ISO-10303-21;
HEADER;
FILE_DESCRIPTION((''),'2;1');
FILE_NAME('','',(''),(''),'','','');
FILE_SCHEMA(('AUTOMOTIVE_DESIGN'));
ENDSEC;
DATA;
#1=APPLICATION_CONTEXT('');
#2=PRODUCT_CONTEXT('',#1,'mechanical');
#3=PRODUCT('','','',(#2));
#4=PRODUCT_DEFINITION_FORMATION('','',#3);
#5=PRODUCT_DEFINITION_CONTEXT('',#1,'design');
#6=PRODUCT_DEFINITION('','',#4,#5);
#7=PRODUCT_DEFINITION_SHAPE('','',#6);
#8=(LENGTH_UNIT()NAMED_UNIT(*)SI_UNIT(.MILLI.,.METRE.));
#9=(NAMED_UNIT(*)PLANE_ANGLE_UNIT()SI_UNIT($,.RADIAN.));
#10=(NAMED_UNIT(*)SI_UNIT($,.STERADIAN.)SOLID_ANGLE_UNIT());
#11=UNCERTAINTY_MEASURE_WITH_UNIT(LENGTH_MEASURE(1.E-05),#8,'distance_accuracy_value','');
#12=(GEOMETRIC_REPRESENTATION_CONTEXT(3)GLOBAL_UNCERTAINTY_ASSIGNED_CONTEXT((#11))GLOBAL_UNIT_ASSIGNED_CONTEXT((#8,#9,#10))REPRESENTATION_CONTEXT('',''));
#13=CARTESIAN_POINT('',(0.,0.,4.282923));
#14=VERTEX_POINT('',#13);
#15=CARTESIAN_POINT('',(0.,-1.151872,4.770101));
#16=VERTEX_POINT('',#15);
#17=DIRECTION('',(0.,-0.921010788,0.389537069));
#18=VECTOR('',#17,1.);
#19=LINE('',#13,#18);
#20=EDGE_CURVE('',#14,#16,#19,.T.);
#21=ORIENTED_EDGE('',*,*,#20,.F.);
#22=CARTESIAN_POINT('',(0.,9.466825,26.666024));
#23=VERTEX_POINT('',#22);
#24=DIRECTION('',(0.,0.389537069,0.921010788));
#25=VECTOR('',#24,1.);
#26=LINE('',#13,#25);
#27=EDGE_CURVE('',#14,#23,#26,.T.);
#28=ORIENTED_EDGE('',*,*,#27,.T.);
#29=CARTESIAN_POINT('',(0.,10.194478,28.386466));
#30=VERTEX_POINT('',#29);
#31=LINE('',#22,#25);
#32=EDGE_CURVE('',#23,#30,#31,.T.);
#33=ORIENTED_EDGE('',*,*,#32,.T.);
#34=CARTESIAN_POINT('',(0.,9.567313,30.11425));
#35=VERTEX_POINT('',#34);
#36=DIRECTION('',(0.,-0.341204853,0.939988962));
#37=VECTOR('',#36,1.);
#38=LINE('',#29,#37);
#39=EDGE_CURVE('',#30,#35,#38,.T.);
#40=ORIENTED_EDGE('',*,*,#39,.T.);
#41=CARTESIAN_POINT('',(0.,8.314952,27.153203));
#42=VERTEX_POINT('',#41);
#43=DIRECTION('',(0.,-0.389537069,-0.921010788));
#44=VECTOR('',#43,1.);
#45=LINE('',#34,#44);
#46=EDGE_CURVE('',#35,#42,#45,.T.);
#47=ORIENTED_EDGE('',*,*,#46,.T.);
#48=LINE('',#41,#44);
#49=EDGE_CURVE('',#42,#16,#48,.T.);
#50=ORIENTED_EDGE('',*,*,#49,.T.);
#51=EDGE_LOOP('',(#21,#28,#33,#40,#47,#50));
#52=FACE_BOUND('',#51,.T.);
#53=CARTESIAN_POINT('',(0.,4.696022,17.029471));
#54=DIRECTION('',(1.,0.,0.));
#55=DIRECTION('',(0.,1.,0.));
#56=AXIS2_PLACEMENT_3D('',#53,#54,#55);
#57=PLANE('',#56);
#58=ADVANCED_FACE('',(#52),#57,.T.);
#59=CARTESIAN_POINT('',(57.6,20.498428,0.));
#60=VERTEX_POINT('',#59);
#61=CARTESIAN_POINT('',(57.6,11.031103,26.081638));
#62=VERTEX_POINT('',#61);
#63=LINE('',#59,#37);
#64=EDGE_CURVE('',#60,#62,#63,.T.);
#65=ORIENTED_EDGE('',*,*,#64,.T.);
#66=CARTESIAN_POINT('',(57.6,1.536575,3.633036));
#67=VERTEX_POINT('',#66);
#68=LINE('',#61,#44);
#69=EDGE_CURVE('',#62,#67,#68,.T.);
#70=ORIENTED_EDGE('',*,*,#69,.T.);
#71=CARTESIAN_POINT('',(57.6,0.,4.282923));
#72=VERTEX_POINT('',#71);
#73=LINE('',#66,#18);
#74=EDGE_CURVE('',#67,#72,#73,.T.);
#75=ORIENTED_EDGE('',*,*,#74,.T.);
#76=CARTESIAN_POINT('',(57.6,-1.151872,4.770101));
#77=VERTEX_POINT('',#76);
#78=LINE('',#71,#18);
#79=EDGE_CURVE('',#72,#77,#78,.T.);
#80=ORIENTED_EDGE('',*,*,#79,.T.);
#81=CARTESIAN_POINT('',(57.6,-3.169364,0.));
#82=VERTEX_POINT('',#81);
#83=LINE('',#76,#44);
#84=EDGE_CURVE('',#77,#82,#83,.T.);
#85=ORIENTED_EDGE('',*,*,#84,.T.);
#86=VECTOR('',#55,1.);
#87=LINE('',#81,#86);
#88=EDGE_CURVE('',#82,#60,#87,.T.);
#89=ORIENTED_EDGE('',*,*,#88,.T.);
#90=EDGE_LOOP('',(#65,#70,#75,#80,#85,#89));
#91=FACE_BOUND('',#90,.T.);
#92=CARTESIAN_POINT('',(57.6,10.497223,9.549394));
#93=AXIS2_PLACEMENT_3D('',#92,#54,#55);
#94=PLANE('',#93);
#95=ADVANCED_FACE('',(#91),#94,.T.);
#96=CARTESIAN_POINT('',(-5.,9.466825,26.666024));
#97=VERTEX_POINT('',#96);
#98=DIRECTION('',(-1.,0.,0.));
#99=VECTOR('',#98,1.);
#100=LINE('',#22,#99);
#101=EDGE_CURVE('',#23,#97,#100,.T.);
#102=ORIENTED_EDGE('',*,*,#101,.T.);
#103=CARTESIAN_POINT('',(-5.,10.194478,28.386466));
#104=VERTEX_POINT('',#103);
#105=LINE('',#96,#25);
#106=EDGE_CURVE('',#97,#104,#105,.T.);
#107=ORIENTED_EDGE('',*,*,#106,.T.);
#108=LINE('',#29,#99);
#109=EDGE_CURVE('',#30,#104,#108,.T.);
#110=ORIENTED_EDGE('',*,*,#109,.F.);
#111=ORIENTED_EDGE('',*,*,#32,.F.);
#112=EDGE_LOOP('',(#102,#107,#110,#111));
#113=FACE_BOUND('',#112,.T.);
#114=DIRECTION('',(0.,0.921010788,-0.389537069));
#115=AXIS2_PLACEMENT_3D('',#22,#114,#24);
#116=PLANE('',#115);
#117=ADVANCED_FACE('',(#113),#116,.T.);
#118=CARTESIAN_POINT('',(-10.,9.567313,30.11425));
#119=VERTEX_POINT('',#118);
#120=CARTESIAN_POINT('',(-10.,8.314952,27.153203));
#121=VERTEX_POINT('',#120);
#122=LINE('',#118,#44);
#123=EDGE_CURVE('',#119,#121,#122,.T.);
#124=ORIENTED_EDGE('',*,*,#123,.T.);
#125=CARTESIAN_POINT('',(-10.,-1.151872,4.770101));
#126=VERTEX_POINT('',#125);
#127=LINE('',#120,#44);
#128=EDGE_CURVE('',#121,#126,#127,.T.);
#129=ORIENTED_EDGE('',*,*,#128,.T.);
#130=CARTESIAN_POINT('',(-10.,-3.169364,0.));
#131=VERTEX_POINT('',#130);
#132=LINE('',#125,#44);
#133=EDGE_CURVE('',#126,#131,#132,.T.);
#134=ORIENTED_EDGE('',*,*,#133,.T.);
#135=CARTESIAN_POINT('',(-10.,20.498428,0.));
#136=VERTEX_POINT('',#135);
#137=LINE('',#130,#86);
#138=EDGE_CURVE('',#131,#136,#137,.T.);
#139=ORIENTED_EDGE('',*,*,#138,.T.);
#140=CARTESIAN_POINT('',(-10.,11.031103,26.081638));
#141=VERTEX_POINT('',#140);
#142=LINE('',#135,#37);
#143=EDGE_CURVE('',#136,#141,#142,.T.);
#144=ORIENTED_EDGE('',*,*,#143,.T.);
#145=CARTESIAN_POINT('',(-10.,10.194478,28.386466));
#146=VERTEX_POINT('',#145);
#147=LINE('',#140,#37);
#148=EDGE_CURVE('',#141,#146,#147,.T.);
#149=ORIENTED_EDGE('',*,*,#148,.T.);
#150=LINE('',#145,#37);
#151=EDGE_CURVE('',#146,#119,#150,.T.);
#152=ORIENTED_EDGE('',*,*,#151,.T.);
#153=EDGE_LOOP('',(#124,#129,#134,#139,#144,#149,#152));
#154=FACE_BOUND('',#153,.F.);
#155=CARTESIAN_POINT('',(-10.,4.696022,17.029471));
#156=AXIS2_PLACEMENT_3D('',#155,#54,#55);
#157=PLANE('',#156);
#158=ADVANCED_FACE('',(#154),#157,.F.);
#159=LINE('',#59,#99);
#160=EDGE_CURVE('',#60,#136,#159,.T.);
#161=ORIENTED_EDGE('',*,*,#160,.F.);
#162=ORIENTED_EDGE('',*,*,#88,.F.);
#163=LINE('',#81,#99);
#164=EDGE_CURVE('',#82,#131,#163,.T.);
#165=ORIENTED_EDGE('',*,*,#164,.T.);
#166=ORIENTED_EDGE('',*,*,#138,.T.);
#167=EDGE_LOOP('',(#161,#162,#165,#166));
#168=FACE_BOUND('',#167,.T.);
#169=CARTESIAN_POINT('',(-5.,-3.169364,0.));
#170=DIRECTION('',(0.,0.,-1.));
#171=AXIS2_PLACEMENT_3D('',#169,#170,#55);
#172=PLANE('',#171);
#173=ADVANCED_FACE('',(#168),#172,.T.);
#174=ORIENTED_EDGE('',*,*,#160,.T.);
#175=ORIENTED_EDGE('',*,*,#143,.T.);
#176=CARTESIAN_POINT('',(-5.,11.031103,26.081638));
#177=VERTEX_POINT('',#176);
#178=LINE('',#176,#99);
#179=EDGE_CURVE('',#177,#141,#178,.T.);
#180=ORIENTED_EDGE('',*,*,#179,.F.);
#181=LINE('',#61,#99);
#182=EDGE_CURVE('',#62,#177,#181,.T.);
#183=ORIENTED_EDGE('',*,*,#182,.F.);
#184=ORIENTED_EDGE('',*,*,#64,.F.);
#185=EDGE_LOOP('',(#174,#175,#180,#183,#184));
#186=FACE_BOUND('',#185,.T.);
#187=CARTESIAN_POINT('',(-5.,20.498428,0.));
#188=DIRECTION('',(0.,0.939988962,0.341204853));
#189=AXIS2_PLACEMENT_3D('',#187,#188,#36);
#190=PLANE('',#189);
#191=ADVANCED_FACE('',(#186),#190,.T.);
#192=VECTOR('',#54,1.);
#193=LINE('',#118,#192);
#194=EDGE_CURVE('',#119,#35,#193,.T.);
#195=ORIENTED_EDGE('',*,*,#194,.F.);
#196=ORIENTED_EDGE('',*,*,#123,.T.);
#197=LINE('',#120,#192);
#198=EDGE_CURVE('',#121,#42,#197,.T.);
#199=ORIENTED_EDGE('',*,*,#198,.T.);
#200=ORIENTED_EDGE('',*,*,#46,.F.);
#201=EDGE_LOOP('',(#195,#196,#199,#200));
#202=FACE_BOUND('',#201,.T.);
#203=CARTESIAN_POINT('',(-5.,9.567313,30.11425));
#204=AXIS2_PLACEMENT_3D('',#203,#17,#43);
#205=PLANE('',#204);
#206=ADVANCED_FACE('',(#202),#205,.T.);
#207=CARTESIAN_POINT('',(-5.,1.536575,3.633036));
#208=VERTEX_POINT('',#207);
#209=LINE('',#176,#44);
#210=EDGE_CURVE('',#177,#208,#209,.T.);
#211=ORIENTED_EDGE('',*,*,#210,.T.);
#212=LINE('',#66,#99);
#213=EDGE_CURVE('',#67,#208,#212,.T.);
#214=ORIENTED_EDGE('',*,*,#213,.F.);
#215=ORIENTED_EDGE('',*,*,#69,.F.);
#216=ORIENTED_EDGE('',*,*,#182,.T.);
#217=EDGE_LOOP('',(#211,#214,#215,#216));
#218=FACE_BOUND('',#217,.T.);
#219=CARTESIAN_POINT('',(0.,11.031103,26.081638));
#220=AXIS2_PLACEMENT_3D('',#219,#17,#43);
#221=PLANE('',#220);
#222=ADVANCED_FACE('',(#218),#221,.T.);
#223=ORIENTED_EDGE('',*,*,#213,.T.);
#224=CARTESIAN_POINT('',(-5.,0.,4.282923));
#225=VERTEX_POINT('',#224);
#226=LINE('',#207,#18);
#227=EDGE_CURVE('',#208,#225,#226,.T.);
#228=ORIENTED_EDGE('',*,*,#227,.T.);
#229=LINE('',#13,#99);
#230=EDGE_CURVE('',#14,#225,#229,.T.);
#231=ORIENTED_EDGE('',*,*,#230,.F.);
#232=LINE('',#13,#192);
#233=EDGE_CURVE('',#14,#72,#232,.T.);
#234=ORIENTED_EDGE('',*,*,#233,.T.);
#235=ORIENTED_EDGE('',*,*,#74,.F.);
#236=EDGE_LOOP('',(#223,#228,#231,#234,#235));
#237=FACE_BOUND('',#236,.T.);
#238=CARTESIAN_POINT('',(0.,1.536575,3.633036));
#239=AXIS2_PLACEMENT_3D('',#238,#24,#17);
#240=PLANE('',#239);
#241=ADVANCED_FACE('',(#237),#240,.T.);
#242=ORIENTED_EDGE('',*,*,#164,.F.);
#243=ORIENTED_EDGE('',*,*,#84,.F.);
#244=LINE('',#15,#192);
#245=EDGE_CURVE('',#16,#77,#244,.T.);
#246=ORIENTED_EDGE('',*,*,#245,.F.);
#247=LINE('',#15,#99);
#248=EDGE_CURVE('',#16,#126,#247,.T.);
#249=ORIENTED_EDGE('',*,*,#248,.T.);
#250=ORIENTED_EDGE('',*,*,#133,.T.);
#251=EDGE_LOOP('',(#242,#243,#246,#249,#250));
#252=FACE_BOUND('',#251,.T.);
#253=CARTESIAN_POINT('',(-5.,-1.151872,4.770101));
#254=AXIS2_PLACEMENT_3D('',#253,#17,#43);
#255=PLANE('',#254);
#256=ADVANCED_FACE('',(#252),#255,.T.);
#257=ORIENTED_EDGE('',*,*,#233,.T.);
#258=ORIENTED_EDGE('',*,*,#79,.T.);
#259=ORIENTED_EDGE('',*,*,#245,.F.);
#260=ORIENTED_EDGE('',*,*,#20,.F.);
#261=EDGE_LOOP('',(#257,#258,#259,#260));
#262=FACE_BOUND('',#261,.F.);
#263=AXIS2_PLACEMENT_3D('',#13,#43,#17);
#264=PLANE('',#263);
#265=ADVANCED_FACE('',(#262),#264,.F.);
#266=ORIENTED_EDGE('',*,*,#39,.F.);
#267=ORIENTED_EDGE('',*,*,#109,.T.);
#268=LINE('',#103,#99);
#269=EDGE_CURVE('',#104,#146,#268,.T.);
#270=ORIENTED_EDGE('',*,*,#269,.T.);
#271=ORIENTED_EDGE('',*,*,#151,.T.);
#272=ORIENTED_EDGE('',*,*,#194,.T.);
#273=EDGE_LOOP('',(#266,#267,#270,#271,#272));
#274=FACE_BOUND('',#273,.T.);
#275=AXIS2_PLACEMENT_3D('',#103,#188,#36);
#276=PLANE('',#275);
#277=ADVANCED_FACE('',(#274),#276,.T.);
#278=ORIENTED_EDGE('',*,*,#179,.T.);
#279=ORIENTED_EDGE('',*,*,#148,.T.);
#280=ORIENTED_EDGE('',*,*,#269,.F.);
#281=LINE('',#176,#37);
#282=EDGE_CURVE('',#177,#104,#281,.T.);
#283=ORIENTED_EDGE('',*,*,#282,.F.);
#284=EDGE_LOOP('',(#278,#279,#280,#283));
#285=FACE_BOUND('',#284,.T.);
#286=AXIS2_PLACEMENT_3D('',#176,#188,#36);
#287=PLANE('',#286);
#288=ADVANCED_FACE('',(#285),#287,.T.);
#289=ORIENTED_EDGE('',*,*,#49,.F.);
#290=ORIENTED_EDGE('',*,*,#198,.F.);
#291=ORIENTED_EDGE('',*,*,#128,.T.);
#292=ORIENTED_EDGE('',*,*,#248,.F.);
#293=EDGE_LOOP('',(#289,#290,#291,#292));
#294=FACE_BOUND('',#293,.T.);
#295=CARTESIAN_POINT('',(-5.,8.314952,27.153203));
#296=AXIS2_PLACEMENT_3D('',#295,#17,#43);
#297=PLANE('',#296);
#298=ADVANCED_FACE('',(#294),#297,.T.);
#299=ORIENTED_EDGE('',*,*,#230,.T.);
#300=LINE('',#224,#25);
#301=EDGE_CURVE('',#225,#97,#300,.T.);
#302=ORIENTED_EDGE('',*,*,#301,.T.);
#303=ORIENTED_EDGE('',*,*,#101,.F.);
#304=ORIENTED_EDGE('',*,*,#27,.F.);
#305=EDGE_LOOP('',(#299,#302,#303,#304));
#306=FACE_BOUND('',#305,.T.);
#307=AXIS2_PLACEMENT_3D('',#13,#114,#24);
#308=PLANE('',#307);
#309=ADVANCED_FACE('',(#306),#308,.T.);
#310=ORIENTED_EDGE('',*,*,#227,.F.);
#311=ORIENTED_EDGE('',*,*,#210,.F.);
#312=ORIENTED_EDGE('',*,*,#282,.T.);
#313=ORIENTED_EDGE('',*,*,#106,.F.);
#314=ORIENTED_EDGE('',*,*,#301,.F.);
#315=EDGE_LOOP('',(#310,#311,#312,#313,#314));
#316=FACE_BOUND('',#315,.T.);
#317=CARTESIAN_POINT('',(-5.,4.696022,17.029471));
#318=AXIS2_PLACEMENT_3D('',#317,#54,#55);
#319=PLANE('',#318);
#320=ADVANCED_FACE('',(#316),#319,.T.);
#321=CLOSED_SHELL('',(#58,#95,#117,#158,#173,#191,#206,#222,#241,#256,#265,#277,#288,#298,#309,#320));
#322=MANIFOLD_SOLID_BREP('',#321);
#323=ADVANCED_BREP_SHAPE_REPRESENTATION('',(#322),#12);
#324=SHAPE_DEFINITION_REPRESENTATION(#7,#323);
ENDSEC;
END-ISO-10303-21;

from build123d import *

# Parameters (mm, degrees)
F1_DEPTH = 57.6
F2_DEPTH = 5
F3_START = -5
F3_DEPTH = 5


# Not quite as in the source:
# - a feature names something its author has since deleted; it is built from what else it names


with BuildPart() as f1:
    # F0 (on Right) → F1 (new body)
    with BuildSketch(Plane.YZ):
        Polygon((1.5365748771, 3.633035603), (0, 0), (20.4984284937, 0), (11.0311029763, 26.0816380962), align=None)
        Polygon((0, 4.2829225325), (0, 0), (1.5365748771, 3.633035603), align=None)
        Polygon((-1.811441418, 0), (0, 0), (0, 4.2829225325), align=None)
        Polygon((-1.811441418, 0), (0, 4.2829225325), (-1.1518723498, 4.7701013845), (-3.1693637124, 0), align=None)
    extrude(amount=F1_DEPTH)

    # F0 (on Right) → F2 (join)
    with BuildSketch(Plane.YZ):
        Polygon((-1.1518723498, 4.7701013845), (0, 4.2829225325), (9.4668246651, 26.666023784), (10.1944775948, 28.3864664644), (9.5673128152, 30.1142495409), (8.3149523153, 27.153202636), align=None)
        Polygon((1.5365748771, 3.633035603), (0, 0), (20.4984284937, 0), (11.0311029763, 26.0816380962), align=None)
        Polygon((-1.811441418, 0), (0, 0), (0, 4.2829225325), align=None)
        Polygon((-1.811441418, 0), (0, 4.2829225325), (-1.1518723498, 4.7701013845), (-3.1693637124, 0), align=None)
        Polygon((0, 4.2829225325), (0, 0), (1.5365748771, 3.633035603), align=None)
    extrude(amount=-F2_DEPTH)

    # F0 (on Right) → F3 (join)
    with BuildSketch(Plane.YZ.offset(F3_START)):
        Polygon((-1.1518723498, 4.7701013845), (0, 4.2829225325), (9.4668246651, 26.666023784), (10.1944775948, 28.3864664644), (9.5673128152, 30.1142495409), (8.3149523153, 27.153202636), align=None)
        Polygon((0, 4.2829225325), (1.5365748771, 3.633035603), (11.0311029763, 26.0816380962), (10.1944775948, 28.3864664644), (9.4668246651, 26.666023784), align=None)
        Polygon((1.5365748771, 3.633035603), (0, 0), (20.4984284937, 0), (11.0311029763, 26.0816380962), align=None)
        Polygon((0, 4.2829225325), (0, 0), (1.5365748771, 3.633035603), align=None)
        Polygon((-1.811441418, 0), (0, 0), (0, 4.2829225325), align=None)
        Polygon((-1.811441418, 0), (0, 4.2829225325), (-1.1518723498, 4.7701013845), (-3.1693637124, 0), align=None)
    extrude(amount=-F3_DEPTH)


solid = f1.part
